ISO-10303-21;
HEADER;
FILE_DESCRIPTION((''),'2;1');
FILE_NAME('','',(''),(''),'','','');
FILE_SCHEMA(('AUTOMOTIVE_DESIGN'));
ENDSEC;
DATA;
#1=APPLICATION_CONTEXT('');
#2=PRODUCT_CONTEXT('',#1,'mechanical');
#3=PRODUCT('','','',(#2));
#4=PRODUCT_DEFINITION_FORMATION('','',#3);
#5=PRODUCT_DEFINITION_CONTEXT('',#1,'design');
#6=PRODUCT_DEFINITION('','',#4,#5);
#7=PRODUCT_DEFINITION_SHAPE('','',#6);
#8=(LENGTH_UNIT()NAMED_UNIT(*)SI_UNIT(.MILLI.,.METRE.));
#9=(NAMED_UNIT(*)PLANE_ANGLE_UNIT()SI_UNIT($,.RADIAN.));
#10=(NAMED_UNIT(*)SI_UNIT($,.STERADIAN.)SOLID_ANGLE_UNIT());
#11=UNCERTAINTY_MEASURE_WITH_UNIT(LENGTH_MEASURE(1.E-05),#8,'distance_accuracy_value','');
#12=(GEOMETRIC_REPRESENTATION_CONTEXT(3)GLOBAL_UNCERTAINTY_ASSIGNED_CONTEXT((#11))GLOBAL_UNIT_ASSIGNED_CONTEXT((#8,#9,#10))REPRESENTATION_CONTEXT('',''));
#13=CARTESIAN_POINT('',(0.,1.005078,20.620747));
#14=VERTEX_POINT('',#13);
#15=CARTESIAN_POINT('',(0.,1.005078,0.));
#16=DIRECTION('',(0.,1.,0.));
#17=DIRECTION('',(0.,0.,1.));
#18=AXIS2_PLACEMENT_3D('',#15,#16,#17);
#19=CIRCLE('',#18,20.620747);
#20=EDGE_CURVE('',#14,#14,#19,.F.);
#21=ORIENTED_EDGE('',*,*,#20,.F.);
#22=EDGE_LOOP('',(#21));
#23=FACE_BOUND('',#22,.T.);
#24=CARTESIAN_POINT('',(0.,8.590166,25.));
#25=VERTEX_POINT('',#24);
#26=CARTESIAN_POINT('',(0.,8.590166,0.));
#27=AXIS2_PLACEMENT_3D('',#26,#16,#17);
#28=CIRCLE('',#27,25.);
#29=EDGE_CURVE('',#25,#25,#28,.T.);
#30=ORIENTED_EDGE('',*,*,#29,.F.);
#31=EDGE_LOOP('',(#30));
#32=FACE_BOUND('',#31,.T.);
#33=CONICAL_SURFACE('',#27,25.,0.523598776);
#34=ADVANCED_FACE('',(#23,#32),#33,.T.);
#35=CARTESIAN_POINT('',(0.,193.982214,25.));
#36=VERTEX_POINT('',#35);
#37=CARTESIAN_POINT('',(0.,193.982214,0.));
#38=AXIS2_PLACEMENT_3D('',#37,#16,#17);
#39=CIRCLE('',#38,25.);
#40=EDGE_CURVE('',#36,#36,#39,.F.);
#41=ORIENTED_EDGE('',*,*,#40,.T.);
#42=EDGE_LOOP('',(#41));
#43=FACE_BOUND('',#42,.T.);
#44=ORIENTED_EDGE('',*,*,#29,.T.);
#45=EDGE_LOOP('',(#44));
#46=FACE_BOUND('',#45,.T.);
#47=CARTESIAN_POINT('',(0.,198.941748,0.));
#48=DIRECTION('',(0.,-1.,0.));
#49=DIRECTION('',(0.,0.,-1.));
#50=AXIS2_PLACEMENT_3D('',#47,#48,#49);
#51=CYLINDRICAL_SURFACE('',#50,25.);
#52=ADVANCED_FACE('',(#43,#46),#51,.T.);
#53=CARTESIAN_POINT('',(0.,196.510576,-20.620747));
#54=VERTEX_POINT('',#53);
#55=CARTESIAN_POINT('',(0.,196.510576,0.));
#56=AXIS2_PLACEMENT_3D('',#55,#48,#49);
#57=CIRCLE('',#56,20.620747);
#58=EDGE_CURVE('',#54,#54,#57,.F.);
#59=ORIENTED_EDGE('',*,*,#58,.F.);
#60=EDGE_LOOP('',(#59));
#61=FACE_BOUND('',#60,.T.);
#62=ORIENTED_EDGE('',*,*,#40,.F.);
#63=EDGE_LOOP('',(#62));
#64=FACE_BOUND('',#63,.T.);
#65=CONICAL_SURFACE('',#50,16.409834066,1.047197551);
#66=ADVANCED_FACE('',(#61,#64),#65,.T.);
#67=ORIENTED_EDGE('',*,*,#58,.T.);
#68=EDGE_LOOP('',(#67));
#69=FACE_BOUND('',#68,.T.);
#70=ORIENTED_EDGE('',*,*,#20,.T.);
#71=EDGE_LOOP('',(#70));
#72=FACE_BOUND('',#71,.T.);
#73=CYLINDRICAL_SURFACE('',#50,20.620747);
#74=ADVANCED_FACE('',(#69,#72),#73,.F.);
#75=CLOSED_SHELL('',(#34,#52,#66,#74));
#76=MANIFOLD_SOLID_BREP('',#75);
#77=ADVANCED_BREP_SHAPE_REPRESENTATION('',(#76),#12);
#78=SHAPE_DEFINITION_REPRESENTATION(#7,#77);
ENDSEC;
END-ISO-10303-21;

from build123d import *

# Parameters (mm, degrees)
SKETCH1_R           = 25
BOSS_EXTRUDE1_DEPTH = 198.941748
SKETCH2_R           = 20.620747434
CUT_EXTRUDE1_DEPTH  = 203.05894956


with BuildPart() as part:
    # Sketch1 → Boss-Extrude1 (new body)
    with BuildSketch(Plane(origin=(0, 0, 0), x_dir=(1, 0, 0), z_dir=(0, 1, 0))):
        with Locations(Location((0, 0, 0), (0, 0, 270))):
            Circle(SKETCH1_R)
    extrude(amount=BOSS_EXTRUDE1_DEPTH)

    # Sketch2 → Cut-Extrude1 (cut, through all)
    with BuildSketch(Plane(origin=(0, 0, 0), x_dir=(1, 0, 0), z_dir=(0, 1, 0))):
        with Locations(Location((0, 0, 0), (0, 0, 270))):
            Circle(SKETCH2_R)
    extrude(amount=CUT_EXTRUDE1_DEPTH, mode=Mode.SUBTRACT)

    # Chamfer1: read off the stored shape, not the designer's step
    # Chamfer1 outline → Chamfer1 (revolve, cut)
    with BuildSketch(Plane.XY):
        Polygon((25, 193.982213725), (25, 198.94174834), (20.620747434, 198.94174834), (20.620747434, 196.510576373), align=None)
        Polygon((25, 8.590165934), (20.620747434, 1.005077991), (20.620747434, 0), (25, 0), align=None)
    revolve(axis=Axis((0, 0, 0), (0, 1, 0)), mode=Mode.SUBTRACT)


solid = part.part
